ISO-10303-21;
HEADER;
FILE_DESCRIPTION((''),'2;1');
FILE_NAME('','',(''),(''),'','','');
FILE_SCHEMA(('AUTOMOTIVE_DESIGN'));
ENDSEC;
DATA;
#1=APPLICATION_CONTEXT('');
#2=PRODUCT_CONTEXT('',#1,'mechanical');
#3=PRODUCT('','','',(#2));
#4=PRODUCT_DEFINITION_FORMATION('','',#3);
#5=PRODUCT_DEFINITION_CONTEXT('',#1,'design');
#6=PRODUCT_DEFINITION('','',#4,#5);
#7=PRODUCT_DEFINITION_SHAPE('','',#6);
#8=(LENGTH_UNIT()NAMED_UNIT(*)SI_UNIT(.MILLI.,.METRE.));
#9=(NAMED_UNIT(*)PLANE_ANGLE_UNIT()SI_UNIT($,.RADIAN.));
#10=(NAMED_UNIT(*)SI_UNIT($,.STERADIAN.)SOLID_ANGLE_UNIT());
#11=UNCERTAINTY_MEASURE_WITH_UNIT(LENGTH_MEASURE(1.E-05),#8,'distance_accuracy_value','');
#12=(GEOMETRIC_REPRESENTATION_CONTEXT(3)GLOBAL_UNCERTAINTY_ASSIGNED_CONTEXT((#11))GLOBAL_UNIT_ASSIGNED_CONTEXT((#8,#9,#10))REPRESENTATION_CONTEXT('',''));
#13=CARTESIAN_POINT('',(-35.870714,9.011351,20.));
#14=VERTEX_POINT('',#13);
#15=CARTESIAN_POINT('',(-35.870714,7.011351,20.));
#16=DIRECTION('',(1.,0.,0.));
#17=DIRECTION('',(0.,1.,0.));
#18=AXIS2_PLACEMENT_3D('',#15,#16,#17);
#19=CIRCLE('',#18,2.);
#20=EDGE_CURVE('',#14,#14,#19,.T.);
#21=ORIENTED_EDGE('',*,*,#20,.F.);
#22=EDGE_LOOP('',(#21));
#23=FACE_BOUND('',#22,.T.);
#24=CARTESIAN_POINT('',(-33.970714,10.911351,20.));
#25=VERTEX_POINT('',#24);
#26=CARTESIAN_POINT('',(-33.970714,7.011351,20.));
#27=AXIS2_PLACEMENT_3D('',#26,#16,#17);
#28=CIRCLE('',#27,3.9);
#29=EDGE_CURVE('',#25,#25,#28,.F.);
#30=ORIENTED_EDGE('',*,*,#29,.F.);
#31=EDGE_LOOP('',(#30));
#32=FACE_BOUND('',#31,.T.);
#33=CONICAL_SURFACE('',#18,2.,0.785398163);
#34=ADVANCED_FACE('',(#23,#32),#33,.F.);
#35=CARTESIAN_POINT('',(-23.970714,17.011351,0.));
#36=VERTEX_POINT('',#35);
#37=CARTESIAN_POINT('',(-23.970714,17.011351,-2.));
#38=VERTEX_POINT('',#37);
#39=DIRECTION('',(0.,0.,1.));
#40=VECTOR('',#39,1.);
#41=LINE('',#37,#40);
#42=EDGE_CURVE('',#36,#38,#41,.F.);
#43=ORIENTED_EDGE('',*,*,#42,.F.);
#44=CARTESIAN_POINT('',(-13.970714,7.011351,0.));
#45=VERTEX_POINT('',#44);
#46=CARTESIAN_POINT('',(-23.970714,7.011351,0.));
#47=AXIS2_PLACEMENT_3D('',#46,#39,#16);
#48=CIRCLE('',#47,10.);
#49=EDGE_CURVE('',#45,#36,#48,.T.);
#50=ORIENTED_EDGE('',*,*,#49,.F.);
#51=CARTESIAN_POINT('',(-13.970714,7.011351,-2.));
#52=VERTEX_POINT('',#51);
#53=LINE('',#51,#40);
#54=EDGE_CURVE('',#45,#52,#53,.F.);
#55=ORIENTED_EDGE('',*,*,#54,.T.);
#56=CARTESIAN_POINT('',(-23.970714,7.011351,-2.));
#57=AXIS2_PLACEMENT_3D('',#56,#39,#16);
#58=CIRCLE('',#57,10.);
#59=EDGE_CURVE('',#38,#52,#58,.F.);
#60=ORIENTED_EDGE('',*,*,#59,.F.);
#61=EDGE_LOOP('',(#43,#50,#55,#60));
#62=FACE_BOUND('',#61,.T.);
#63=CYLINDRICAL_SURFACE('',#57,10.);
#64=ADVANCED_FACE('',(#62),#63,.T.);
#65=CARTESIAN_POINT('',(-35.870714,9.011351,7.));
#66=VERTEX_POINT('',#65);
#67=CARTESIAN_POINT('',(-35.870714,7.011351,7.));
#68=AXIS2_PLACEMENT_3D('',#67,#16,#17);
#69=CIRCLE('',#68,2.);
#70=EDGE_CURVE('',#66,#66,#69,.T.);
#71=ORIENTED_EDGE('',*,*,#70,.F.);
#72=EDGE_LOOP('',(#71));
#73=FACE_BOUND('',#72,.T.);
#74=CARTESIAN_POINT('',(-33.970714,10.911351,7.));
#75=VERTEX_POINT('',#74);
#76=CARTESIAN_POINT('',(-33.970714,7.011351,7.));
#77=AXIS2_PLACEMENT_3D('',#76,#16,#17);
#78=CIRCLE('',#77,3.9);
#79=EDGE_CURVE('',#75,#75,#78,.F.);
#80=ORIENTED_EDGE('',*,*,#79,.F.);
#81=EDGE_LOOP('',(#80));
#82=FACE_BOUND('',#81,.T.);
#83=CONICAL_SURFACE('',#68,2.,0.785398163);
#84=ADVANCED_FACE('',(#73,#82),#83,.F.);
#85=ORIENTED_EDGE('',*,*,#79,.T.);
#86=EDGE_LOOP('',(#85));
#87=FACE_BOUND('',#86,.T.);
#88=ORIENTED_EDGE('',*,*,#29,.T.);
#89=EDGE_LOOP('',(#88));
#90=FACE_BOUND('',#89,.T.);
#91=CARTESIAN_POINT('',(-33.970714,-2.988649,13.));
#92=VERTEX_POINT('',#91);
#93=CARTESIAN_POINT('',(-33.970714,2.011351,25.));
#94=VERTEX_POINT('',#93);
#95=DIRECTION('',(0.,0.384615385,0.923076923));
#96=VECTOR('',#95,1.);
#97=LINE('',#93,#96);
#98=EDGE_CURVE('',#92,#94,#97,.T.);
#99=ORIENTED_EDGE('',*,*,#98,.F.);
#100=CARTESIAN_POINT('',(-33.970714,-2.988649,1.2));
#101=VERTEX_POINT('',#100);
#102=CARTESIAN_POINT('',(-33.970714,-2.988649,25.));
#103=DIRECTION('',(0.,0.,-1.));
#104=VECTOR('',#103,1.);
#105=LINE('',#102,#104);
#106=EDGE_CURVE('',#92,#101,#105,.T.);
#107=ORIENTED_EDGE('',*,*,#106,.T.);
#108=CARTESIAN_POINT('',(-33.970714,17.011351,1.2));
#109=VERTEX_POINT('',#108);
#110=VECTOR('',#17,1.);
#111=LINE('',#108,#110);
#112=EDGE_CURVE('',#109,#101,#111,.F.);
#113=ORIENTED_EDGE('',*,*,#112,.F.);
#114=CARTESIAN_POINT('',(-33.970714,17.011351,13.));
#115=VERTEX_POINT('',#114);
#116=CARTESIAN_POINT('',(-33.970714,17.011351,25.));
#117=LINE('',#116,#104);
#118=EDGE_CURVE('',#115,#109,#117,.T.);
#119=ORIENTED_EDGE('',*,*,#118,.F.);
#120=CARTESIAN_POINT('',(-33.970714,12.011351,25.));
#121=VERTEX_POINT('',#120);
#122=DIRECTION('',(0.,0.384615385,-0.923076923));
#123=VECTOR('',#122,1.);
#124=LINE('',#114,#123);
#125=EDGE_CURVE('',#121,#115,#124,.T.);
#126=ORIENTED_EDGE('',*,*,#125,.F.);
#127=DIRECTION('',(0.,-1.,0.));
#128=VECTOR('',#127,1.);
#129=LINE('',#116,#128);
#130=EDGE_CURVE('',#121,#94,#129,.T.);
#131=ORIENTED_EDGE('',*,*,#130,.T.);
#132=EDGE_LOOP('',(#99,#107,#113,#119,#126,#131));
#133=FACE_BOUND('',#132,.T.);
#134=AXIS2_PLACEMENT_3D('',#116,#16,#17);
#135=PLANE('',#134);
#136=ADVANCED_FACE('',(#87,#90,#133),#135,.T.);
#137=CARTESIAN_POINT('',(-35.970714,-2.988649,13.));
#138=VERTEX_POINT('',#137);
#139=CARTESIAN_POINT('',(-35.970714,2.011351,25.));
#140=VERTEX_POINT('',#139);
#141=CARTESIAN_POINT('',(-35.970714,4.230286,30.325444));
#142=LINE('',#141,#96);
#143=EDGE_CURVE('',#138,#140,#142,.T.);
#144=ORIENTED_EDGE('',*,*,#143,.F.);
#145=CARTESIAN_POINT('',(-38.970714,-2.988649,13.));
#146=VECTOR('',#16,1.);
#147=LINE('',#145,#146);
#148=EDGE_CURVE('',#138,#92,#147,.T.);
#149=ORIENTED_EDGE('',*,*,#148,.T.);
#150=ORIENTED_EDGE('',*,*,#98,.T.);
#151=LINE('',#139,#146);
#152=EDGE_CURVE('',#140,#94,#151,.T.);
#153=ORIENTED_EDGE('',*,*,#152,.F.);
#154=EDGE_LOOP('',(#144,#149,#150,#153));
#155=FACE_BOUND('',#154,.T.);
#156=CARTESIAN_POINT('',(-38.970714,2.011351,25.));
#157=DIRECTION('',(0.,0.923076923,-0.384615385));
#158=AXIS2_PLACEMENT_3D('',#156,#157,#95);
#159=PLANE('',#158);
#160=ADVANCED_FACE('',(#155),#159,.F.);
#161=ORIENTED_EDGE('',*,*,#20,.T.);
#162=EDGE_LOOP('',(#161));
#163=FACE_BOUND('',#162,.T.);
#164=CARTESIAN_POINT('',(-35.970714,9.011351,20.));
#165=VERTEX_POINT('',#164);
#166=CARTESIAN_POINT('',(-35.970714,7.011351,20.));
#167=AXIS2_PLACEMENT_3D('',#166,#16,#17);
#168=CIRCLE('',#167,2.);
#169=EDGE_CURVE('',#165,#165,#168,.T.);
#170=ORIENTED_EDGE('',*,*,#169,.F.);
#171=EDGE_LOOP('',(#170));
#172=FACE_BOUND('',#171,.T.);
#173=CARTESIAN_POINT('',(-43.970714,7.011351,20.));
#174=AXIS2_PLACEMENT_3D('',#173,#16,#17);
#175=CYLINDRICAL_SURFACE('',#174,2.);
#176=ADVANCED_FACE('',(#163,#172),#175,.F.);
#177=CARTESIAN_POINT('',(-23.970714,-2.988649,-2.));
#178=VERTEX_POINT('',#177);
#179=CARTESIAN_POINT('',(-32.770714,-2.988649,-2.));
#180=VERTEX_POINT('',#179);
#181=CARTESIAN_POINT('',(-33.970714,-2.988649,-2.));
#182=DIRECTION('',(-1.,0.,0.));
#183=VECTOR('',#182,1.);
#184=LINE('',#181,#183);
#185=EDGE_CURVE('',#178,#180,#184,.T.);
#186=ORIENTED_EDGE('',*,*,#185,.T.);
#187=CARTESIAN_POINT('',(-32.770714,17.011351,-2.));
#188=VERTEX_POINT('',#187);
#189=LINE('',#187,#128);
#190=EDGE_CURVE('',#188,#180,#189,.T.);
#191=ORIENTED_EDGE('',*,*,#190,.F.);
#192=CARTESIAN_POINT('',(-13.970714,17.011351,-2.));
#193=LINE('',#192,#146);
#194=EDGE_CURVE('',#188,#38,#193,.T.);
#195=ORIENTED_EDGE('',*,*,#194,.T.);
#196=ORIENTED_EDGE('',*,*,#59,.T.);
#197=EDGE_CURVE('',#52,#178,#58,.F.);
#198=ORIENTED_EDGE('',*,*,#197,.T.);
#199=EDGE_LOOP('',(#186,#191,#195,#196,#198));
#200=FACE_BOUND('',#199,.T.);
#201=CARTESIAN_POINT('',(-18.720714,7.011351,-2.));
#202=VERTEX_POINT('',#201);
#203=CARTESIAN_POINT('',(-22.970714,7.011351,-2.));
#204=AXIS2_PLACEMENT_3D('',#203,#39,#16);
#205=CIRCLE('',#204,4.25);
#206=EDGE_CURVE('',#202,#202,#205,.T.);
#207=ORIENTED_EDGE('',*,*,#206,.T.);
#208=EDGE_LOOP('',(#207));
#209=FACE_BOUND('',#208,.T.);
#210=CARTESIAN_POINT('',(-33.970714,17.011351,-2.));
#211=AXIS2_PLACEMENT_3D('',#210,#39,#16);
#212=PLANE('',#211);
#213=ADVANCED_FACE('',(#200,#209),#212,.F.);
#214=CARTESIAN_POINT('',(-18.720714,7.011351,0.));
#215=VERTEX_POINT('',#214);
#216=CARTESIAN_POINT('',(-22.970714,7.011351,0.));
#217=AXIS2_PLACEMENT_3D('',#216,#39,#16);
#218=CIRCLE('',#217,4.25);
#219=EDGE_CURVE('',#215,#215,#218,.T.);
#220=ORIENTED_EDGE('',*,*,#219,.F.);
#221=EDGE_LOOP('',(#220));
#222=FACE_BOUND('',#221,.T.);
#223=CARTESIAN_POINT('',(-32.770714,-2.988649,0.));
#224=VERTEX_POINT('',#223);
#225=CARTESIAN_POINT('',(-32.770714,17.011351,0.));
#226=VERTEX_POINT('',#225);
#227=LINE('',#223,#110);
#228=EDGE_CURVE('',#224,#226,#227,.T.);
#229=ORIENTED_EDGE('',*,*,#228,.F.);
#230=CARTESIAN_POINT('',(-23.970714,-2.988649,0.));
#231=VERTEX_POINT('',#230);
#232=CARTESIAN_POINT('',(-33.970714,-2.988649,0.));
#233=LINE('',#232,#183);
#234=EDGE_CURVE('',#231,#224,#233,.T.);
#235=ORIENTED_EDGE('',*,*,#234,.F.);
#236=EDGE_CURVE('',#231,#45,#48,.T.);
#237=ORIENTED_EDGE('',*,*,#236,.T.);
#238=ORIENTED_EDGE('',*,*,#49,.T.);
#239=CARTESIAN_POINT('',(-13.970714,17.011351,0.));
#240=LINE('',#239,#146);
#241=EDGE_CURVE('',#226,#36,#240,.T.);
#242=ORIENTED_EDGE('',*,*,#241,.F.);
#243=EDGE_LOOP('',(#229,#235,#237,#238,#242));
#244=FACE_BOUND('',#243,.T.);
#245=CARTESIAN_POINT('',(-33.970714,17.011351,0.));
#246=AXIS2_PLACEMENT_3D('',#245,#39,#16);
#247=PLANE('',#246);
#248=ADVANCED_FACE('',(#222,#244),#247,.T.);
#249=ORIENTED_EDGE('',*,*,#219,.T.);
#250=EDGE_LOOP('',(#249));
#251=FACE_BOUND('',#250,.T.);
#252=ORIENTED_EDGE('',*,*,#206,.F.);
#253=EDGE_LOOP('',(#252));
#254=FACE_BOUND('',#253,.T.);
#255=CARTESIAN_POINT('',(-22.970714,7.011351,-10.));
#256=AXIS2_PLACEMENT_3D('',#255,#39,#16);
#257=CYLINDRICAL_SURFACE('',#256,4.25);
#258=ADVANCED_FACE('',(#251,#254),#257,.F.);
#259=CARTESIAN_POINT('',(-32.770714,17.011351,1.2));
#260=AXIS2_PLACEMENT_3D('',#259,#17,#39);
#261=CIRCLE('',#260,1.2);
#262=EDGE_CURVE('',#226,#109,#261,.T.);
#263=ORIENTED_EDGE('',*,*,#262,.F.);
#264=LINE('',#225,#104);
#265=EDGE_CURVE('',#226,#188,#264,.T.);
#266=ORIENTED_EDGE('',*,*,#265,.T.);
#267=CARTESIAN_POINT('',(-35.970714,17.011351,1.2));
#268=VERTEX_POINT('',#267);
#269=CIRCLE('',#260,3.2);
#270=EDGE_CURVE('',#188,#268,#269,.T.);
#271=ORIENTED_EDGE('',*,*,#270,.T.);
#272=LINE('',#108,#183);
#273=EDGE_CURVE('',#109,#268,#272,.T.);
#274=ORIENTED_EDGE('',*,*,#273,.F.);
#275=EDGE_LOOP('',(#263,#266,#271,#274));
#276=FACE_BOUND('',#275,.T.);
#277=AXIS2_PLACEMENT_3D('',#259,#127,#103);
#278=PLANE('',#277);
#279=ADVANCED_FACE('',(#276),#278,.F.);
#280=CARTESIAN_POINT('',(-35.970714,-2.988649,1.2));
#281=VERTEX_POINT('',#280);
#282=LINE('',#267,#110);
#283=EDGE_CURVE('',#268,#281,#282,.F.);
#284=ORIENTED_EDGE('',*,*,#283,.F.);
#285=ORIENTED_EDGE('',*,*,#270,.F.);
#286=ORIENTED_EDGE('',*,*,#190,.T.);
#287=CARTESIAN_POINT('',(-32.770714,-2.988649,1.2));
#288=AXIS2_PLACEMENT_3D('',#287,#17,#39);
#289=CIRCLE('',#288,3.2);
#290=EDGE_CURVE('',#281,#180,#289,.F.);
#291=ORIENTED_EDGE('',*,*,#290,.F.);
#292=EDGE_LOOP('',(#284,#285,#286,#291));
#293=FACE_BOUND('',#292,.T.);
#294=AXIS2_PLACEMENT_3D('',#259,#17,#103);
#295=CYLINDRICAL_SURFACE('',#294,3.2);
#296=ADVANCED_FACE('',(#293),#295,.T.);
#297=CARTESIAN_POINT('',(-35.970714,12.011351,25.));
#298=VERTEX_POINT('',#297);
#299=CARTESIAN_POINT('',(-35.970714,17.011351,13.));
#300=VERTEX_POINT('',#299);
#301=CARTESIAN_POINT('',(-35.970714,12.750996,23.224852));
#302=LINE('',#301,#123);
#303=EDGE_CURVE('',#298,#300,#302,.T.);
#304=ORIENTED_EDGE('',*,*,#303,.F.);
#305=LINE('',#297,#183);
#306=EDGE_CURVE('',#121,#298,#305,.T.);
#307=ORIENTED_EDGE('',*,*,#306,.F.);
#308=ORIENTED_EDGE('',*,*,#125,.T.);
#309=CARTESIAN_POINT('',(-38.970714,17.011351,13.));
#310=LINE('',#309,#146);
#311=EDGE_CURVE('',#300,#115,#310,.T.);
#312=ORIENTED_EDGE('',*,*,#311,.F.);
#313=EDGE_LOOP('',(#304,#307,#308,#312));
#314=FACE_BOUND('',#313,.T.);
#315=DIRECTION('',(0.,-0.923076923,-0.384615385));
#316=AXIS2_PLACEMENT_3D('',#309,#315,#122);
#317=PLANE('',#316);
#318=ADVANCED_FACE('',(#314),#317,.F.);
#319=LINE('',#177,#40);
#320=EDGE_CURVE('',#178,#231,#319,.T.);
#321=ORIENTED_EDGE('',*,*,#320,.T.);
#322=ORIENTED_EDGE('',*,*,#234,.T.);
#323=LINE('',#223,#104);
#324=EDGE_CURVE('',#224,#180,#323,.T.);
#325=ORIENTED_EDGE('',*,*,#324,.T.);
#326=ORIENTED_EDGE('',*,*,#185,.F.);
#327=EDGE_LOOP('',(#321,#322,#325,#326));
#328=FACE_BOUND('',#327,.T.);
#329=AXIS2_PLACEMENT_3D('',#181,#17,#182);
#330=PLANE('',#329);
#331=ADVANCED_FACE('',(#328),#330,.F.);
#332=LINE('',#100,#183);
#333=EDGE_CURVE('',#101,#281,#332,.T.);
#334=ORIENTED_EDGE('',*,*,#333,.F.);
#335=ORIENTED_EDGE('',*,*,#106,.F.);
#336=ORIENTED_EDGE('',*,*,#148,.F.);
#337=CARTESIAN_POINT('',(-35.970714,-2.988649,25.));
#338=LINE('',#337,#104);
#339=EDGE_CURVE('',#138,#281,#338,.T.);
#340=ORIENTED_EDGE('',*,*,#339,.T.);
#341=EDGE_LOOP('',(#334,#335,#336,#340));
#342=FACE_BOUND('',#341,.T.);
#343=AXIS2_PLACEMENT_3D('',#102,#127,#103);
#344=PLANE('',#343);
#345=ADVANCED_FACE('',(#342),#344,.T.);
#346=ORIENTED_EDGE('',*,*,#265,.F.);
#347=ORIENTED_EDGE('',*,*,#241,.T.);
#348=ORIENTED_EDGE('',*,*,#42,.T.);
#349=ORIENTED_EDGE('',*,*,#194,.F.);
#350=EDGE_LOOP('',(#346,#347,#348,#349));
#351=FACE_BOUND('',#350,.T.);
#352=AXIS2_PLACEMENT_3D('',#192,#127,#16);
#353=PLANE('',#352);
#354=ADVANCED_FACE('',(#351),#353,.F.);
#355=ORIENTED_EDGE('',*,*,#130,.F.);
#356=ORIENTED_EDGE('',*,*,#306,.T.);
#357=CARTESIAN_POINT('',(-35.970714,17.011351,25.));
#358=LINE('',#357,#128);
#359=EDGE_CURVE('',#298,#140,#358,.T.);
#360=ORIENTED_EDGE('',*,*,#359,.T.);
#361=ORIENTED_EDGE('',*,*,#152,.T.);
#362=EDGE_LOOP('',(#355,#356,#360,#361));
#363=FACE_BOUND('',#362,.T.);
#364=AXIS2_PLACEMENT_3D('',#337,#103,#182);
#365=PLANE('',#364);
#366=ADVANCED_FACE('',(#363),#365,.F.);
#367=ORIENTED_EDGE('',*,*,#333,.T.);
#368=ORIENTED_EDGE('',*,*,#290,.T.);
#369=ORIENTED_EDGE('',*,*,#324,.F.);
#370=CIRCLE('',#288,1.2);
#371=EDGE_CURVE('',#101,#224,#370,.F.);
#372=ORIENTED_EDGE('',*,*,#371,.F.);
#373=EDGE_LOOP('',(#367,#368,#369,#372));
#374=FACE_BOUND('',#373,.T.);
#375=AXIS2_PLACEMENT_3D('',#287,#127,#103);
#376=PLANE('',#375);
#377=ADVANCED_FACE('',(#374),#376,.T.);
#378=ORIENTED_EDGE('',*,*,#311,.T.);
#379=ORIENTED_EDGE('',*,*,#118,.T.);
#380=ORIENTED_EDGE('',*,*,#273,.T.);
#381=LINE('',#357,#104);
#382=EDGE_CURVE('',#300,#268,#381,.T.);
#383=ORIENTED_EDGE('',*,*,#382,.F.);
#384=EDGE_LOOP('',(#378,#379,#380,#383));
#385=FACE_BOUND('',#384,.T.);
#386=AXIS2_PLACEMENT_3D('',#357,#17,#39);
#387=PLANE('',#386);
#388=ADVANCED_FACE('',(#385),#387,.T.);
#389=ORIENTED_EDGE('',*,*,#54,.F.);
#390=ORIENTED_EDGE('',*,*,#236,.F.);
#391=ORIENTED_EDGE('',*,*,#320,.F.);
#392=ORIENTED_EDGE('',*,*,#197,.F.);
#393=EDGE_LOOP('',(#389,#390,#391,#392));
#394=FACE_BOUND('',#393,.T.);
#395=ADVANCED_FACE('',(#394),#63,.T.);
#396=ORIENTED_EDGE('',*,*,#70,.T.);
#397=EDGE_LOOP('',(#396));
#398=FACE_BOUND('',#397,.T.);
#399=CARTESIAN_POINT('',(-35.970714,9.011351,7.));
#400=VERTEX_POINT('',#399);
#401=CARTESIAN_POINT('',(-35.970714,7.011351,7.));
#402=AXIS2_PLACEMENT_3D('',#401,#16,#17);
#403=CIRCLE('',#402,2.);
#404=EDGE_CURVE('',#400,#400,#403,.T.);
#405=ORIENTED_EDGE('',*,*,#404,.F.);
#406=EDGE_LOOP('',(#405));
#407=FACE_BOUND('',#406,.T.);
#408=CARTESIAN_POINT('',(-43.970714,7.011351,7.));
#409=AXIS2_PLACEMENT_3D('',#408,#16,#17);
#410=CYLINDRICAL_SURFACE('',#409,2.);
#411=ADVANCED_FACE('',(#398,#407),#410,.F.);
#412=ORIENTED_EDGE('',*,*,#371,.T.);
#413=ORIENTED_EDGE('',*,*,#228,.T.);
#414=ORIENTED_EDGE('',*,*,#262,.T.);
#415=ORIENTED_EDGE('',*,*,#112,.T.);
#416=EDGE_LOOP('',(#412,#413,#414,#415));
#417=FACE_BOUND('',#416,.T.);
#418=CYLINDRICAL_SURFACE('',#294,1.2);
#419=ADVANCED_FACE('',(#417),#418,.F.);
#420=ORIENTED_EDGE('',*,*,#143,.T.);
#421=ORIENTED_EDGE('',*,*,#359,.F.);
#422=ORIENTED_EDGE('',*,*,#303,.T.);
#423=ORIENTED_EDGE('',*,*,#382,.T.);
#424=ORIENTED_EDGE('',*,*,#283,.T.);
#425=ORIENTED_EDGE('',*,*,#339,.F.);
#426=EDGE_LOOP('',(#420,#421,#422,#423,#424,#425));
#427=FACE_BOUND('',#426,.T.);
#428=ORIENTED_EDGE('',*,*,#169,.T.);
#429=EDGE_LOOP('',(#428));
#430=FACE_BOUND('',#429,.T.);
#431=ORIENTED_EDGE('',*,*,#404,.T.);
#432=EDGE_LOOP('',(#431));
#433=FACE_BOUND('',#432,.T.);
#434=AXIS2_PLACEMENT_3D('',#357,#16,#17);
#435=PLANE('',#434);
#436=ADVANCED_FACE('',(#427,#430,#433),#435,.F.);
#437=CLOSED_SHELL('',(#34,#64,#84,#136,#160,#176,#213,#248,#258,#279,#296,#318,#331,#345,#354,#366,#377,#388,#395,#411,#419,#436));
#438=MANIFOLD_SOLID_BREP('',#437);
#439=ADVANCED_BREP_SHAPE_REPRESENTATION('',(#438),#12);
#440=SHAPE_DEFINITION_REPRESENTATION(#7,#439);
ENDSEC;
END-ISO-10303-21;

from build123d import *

# Parameters (mm, degrees)
SKETCH_1_W                       = 2
SKETCH_1_H                       = 20
SM_BASE_FLANGE_1_DEPTH           = 25
SM_EDGE_FLANGE_1_STRIP_W         = 10.4
SM_EDGE_FLANGE_1_STRIP_H         = 2
SM_EDGE_FLANGE_1_STRIP_CUT_DEPTH = 20
SM_EDGE_FLANGE_1_DEPTH           = 20
SKETCH_6_R                       = 4.25
CUT_EXTRUDE_1_DEPTH              = 10
FILLET_1_R                       = 10
SKETCH_7_R                       = 2
CUT_EXTRUDE_2_DEPTH              = 10
CUT_EXTRUDE_3_DEPTH              = 5
CHAMFER_1_SIZE                   = 1.9


# Sheet-metal steps are written as plain solids
with BuildPart() as part:
    # Sketch 1 → Базовая кромка1 (new body)
    with BuildSketch(Plane.XY):
        with Locations((-34.970714213, 7.011351052)):
            Rectangle(SKETCH_1_W, SKETCH_1_H)
    extrude(amount=SM_BASE_FLANGE_1_DEPTH)

    # Ребро-кромка1 strip (across the edge) → Ребро-кромка1 strip cut (cut)
    with BuildSketch(Plane(origin=(-33.970714213, -2.988648948, 0), x_dir=(0, 0, 1), z_dir=(0, 1, 0))):
        with Locations((-4, -1)):
            Rectangle(SM_EDGE_FLANGE_1_STRIP_W, SM_EDGE_FLANGE_1_STRIP_H)
    extrude(amount=SM_EDGE_FLANGE_1_STRIP_CUT_DEPTH, mode=Mode.SUBTRACT)

    # Ребро-кромка1 section (across the edge) → Ребро-кромка1 (add)
    with BuildSketch(Plane(origin=(-33.970714213, -2.988648948, 0), x_dir=(0, 0, 1), z_dir=(0, 1, 0))):
        with BuildLine():
            Line((-2, 1.2), (-2, 20))
            Line((-2, 20), (0, 20))
            Line((0, 20), (0, 1.2))
            ThreePointArc((0, 1.2), (0.351471863, 0.351471863), (1.2, 0))
            Line((1.2, 0), (1.2, -2))
            ThreePointArc((1.2, -2), (-1.0627417, -1.0627417), (-2, 1.2))
        make_face()
    extrude(amount=SM_EDGE_FLANGE_1_DEPTH)

    # Эскиз6 → Вырез-Вытянуть1 (cut)
    with BuildSketch(Plane.XY):
        with Locations((-22.970714213, 7.011351052)):
            Circle(SKETCH_6_R)
    extrude(amount=-CUT_EXTRUDE_1_DEPTH, mode=Mode.SUBTRACT)

    # Скругление1
    fillet_1_edges = [part.edges().sort_by_distance(p)[0] for p in [
        (-13.970714213, 17.011351052, -1),
        (-13.970714213, -2.988648948, -1),
    ]]
    fillet(fillet_1_edges, radius=FILLET_1_R - 0.0001)  # a hair under: the kernel refuses the full size

    # Эскиз7 → Вырез-Вытянуть2 (cut)
    with BuildSketch(Plane(origin=(-33.970714213, 0, 0), x_dir=(0, 0, -1), z_dir=(1, 0, 0))):
        with Locations(Location((-20, 7.011351052, 0), (0, 0, 90))):
            Circle(SKETCH_7_R)
        with Locations(Location((-7, 7.011351052, 0), (0, 0, 90))):
            Circle(SKETCH_7_R)
    extrude(amount=-CUT_EXTRUDE_2_DEPTH, mode=Mode.SUBTRACT)

    # Эскиз9 → Вырез-Вытянуть3 (cut)
    with BuildSketch(Plane(origin=(-33.970714213, 0, 0), x_dir=(0, 0, -1), z_dir=(1, 0, 0))):
        Polygon((-25, 17.011351052), (-13, 17.011351052), (-25, 12.011351052), align=None)
        Polygon((-25, 2.011351052), (-13, -2.988648948), (-25, -2.988648948), align=None)
    extrude(amount=-CUT_EXTRUDE_3_DEPTH, mode=Mode.SUBTRACT)

    # Фаска1
    chamfer_1_edges = [part.edges().sort_by_distance(p)[0] for p in [
        (-33.970714213, 5.011351052, 20),
        (-33.970714213, 5.011351052, 7),
    ]]
    chamfer(chamfer_1_edges, length=CHAMFER_1_SIZE)


solid = part.part
